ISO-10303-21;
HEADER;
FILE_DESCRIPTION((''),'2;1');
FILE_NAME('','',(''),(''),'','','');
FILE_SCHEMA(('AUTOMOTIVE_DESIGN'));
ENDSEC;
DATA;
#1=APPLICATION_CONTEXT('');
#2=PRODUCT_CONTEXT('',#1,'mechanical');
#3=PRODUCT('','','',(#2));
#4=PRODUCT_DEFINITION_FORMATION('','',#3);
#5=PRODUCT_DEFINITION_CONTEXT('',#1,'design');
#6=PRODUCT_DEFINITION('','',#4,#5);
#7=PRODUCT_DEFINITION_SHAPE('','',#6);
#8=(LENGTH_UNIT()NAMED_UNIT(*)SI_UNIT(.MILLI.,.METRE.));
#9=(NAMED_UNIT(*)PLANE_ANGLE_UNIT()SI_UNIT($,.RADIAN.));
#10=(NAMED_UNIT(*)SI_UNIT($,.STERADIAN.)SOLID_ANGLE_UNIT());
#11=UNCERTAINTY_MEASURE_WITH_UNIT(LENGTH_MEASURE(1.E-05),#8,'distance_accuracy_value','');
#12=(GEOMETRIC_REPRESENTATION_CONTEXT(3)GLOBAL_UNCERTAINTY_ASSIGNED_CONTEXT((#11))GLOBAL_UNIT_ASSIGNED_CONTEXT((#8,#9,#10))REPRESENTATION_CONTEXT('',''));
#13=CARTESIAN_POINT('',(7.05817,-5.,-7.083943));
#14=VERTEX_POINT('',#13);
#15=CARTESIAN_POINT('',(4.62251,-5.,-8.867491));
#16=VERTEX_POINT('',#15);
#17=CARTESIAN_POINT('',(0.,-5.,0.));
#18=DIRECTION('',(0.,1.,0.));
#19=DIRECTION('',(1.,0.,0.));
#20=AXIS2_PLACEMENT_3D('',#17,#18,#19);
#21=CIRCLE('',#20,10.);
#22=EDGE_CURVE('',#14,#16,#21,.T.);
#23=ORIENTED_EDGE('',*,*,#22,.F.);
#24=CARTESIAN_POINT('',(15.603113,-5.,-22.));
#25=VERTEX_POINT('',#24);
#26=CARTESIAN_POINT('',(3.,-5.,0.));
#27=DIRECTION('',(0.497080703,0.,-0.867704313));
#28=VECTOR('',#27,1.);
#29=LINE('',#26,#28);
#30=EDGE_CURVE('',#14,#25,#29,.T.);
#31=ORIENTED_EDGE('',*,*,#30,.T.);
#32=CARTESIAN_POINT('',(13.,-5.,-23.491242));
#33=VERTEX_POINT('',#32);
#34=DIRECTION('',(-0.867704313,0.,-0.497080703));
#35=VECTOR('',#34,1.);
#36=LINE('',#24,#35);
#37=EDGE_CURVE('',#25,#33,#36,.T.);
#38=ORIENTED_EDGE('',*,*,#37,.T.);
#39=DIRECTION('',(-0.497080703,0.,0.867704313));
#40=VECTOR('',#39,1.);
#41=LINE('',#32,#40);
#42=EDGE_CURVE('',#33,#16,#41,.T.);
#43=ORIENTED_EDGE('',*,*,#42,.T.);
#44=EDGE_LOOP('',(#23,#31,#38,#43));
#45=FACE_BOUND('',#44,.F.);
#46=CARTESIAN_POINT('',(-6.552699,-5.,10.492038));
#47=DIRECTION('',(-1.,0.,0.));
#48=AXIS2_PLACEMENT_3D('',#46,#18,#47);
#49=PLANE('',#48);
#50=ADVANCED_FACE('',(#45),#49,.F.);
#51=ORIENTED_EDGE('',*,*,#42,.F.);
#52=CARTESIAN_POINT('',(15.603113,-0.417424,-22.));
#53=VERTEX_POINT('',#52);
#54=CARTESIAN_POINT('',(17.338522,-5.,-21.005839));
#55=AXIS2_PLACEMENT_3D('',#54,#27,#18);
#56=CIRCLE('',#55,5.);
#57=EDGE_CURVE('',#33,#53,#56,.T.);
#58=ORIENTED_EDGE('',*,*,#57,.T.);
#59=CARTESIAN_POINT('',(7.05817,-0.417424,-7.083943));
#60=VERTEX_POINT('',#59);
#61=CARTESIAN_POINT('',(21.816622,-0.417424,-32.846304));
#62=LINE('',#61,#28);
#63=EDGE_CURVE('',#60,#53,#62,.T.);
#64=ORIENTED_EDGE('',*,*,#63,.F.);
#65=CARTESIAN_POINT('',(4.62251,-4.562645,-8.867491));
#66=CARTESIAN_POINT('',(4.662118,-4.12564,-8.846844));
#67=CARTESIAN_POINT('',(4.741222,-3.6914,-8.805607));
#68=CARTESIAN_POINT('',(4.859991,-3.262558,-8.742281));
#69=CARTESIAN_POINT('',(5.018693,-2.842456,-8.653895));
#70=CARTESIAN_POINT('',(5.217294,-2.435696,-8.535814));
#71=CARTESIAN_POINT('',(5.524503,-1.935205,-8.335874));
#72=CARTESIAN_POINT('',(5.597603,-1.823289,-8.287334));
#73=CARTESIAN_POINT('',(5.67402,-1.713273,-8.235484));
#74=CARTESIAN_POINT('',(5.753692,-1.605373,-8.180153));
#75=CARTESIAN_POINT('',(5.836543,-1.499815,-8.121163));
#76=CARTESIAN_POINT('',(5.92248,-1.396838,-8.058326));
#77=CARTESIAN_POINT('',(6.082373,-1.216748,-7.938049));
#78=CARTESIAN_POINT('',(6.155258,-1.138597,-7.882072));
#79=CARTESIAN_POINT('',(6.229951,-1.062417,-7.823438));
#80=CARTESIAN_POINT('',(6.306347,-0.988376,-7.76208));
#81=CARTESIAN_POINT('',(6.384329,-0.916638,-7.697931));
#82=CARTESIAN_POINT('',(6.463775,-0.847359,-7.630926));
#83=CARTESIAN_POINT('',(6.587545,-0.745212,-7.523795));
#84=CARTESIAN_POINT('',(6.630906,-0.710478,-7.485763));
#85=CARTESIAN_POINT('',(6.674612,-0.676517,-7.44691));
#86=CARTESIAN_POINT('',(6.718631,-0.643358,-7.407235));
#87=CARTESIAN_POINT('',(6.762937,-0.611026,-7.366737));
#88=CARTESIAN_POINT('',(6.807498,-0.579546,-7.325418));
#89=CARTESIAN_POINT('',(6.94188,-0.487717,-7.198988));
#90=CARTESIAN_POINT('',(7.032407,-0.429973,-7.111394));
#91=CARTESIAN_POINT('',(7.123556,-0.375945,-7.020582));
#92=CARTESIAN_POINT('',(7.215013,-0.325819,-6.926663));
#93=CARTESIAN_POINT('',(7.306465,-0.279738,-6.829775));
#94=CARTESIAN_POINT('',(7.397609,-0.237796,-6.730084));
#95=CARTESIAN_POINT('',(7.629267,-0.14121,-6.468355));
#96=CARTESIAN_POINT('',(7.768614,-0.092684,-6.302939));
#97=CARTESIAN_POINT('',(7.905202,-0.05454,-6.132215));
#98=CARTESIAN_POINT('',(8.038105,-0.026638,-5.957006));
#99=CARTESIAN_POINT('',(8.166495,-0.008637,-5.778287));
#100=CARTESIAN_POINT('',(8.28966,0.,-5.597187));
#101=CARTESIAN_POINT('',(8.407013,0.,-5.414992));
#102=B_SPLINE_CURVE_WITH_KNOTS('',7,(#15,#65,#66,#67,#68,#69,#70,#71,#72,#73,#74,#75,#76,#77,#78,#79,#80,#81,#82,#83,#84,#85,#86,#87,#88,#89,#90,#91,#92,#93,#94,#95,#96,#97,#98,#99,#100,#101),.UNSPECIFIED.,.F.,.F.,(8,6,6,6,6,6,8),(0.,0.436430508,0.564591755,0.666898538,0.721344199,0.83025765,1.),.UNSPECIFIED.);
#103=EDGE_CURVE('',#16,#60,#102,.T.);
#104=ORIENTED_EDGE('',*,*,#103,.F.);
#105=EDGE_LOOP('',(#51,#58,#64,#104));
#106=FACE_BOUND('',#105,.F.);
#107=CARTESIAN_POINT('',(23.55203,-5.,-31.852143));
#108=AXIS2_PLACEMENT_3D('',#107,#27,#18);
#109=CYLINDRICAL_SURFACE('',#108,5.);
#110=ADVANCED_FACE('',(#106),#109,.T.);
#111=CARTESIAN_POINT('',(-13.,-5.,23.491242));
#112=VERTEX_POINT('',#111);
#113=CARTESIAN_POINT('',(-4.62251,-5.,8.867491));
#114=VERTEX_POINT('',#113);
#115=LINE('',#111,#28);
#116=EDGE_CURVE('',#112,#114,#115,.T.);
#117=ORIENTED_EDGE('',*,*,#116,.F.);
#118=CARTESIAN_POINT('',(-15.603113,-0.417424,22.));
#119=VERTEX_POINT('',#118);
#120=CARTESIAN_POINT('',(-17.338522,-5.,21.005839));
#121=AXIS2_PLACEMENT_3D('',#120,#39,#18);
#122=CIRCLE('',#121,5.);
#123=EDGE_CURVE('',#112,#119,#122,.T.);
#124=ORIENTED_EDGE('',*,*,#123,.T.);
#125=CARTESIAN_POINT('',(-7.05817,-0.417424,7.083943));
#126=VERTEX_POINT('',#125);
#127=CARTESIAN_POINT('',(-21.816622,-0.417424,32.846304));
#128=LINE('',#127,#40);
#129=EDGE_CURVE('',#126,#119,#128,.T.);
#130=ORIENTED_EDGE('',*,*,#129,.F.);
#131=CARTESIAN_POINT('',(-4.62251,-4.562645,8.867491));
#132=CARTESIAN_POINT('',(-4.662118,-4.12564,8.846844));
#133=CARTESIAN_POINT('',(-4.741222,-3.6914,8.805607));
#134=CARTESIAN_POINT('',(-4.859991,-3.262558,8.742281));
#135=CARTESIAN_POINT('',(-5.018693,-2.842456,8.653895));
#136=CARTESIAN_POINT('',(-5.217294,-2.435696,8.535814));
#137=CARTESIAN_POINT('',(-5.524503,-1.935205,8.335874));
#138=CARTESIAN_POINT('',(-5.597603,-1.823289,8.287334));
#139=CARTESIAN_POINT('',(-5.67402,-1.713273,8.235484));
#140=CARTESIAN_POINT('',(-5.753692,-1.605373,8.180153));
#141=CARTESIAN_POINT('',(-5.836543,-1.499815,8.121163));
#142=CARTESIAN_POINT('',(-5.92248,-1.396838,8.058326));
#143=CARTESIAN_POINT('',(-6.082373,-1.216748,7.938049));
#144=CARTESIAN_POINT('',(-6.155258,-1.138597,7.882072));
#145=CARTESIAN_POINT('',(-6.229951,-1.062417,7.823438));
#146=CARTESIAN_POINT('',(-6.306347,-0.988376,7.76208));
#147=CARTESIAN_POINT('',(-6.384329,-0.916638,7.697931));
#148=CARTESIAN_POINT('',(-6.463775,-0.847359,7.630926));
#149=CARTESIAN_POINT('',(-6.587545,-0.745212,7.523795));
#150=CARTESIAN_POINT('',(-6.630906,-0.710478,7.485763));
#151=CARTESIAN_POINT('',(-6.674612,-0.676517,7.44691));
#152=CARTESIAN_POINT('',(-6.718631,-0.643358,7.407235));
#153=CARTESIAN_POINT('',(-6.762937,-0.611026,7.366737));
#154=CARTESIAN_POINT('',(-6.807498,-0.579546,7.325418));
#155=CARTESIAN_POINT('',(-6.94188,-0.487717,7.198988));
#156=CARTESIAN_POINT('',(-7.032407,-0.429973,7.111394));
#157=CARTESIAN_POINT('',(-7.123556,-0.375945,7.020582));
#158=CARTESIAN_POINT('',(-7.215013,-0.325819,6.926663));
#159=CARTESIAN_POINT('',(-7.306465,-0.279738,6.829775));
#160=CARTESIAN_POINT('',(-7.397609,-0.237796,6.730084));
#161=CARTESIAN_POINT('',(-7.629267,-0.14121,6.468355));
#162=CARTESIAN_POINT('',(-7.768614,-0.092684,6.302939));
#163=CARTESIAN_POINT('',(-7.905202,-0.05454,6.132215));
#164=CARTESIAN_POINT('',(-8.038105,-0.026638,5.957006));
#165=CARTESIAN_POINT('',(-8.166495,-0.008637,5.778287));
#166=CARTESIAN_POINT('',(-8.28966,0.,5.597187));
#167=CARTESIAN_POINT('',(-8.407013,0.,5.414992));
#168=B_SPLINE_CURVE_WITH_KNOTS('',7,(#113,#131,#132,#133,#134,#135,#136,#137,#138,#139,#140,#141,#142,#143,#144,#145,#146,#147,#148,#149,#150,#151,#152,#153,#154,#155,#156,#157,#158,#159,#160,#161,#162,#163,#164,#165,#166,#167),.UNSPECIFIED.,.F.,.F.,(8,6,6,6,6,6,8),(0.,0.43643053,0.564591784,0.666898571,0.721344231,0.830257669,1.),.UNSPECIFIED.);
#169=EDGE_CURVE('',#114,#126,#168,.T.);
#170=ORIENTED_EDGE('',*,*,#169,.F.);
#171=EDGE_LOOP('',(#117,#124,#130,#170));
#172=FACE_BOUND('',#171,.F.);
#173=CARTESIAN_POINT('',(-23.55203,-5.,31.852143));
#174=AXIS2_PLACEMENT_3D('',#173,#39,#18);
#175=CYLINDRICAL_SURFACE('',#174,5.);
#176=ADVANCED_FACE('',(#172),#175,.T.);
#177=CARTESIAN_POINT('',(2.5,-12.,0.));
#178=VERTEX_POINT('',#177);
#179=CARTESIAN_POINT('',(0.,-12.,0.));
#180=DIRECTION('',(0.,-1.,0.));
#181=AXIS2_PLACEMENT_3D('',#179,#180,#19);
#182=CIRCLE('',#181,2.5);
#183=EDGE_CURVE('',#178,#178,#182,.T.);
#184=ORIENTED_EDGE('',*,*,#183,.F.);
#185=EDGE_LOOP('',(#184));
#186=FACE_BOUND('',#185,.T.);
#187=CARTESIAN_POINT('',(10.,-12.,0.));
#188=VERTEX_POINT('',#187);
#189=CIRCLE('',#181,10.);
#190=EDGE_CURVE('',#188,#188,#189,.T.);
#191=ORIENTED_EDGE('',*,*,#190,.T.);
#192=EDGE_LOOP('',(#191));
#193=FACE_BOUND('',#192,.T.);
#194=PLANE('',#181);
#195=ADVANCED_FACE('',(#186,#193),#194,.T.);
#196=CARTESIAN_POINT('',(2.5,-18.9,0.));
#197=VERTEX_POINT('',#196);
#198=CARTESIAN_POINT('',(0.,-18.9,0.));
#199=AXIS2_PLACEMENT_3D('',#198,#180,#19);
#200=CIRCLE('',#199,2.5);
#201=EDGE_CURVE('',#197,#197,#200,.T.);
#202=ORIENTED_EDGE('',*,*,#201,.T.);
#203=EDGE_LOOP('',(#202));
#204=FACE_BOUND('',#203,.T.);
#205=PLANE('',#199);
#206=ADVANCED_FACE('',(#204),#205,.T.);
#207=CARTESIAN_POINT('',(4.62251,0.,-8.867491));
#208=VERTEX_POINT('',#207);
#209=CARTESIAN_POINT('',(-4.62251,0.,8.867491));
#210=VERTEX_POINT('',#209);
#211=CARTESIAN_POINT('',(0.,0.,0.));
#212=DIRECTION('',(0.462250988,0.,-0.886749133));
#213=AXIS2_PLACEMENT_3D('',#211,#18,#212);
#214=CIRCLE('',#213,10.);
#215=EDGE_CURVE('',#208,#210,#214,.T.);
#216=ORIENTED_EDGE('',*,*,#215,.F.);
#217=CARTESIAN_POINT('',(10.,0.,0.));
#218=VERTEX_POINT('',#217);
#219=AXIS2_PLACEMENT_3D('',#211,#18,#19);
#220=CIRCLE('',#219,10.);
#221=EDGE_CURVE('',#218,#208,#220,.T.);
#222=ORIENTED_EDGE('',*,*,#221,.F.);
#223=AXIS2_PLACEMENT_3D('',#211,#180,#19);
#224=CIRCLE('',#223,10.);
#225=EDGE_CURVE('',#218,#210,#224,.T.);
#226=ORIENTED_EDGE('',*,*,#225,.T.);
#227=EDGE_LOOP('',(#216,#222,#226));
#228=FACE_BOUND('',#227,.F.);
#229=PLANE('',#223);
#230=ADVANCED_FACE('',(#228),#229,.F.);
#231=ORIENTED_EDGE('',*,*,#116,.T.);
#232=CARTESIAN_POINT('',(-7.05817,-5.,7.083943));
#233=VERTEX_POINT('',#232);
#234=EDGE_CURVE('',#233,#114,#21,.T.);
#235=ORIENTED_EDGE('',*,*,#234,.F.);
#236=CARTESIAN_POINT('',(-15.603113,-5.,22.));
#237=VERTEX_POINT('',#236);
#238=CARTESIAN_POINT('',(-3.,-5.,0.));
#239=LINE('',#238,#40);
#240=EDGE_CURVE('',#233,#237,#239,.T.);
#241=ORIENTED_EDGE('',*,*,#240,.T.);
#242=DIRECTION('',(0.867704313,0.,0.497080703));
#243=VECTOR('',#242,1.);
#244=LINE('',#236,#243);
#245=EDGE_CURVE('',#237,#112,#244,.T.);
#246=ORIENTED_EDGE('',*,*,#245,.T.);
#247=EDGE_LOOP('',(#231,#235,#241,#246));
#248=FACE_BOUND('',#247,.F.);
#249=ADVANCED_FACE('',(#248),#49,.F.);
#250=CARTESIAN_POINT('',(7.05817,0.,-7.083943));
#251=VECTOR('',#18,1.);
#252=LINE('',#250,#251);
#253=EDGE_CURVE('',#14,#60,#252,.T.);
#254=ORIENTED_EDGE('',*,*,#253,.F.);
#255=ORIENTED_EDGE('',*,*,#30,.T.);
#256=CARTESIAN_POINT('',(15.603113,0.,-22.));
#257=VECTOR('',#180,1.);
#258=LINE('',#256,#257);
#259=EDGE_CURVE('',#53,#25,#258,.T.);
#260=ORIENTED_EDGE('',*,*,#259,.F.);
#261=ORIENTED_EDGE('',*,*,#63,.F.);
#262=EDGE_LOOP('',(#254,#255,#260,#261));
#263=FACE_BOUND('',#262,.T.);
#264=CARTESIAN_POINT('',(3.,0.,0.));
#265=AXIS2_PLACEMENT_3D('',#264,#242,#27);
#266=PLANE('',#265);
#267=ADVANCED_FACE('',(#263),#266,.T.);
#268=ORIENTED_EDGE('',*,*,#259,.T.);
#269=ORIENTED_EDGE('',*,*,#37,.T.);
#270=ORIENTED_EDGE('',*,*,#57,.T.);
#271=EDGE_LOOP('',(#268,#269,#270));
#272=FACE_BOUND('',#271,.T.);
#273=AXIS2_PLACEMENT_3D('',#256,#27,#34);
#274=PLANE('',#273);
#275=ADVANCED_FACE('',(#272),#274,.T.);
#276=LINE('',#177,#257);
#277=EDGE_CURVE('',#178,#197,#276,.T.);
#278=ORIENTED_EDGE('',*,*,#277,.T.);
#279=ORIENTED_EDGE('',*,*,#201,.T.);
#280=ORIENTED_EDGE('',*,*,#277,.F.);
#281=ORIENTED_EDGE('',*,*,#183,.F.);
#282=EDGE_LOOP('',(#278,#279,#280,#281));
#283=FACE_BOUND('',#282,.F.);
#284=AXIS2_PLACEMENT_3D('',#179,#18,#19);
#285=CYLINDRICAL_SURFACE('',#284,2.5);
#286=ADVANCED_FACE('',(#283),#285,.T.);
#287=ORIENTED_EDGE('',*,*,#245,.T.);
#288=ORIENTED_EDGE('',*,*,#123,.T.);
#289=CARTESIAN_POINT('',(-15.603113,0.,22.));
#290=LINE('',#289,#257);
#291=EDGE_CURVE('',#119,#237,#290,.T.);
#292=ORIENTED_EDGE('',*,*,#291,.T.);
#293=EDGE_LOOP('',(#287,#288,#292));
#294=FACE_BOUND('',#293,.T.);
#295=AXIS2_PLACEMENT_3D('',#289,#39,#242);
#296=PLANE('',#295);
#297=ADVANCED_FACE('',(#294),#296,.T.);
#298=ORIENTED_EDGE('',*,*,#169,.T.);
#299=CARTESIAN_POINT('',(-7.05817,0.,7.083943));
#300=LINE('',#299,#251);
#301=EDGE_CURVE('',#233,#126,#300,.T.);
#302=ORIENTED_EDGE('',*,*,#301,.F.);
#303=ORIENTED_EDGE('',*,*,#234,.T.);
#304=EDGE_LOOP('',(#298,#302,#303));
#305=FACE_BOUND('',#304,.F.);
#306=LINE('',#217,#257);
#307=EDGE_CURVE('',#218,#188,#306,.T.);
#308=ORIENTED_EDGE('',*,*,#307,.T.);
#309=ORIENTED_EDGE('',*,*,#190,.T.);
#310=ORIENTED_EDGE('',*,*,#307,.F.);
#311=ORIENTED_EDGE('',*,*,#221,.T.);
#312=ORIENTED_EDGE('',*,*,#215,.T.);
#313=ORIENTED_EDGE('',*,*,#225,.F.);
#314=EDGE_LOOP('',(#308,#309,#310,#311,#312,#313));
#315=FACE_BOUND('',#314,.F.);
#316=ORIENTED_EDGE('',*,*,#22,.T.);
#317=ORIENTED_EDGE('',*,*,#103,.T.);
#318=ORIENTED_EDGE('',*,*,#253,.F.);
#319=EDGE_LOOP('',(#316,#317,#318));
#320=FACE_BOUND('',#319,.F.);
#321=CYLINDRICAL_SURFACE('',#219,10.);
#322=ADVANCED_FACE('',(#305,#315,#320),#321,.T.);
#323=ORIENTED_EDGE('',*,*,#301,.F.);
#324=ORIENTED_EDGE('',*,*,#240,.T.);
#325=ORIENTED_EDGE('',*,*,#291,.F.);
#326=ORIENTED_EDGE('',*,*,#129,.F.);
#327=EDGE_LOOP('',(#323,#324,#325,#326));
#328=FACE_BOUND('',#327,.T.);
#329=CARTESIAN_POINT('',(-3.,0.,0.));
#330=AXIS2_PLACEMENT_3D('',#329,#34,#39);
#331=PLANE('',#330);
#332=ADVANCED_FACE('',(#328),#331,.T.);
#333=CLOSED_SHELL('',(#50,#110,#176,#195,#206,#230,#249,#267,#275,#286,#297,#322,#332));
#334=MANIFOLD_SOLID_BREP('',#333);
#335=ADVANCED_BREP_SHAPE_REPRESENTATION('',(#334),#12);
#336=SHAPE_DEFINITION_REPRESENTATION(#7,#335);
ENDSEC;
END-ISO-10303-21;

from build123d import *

# Parameters (mm, degrees)
F0_R         = 10
F1_DEPTH     = 12
F3_DEPTH     = 5
F4_T4_DEPTH  = 41.8533803035
F4_S5_R      = 10
F4_T6_DEPTH  = 25
F4_T10_DEPTH = 41.8533803035
F4_S11_R     = 10
F4_T12_DEPTH = 25
F5_R         = 2.5
F6_DEPTH     = 6.9


# Not quite as in the source:
# - a fillet or chamfer that OpenCascade refuses, or shapes differently, is made with other operations: its cross-section is extruded or revolved along the edge and cut away or added


with BuildPart() as f1:
    # F0 (on Front) → F1 (new body)
    with BuildSketch(Plane.XZ):
        Circle(F0_R)
    extrude(amount=F1_DEPTH)

    # F2 (on face) → F3 (join)
    with BuildSketch(Plane(origin=(0, 0, 0), x_dir=(-1, 0, 0), z_dir=(0, 1, 0))):
        Polygon((2.4069448783, 5), (-2.4069448783, 5), (-3, 0), (3, 0), (15.6031129395, 22), (13, 23.4912421078), align=None)
        Polygon((3, 0), (-3, 0), (-15.6031129395, -22), (-13, -23.4912421078), (-2.4069448783, -5), (2.4069448783, -5), align=None)
    extrude(amount=-F3_DEPTH)

    # F4: fillet of radius 5 on 2 edges, made by hand


with BuildPart() as f4_tool2:
    # F4_s3 → F4_t4 (new body)
    with BuildSketch(Plane(origin=(-19.5578893967, 0, 34.1402611236), x_dir=(0, 1, 0), z_dir=(0.4970807026, 0, -0.8677043132))):
        with BuildLine():
            ThreePointArc((0, -4.6031129395), (-1.4644660941, -1.0675790336), (-5, 0.3968870605))
            Line((-5, 0.3968870605), (0, 0.3968870605))
            Line((0, 0.3968870605), (0, -4.6031129395))
        make_face()
    extrude(amount=F4_T4_DEPTH)

    # F4_s5 → F4_t6 (cut, symmetric)
    with BuildSketch(Plane.XZ.offset(2.5)):
        Circle(F4_S5_R)
    extrude(amount=F4_T6_DEPTH, both=True, mode=Mode.SUBTRACT)


with BuildPart() as f1_1:
    add(f1.part)

    # F4_t1: cut F4_tool2
    add(f4_tool2.part, mode=Mode.SUBTRACT)


with BuildPart() as f4_tool8:
    # F4_s9 → F4_t10 (new body)
    with BuildSketch(Plane(origin=(19.5578893967, 0, -34.1402611236), x_dir=(0, 1, 0), z_dir=(-0.4970807026, 0, 0.8677043132))):
        with BuildLine():
            ThreePointArc((0, -4.6031129395), (-1.4644660941, -1.0675790336), (-5, 0.3968870605))
            Line((-5, 0.3968870605), (0, 0.3968870605))
            Line((0, 0.3968870605), (0, -4.6031129395))
        make_face()
    extrude(amount=F4_T10_DEPTH)

    # F4_s11 → F4_t12 (cut, symmetric)
    with BuildSketch(Plane.XZ.offset(2.5)):
        Circle(F4_S11_R)
    extrude(amount=F4_T12_DEPTH, both=True, mode=Mode.SUBTRACT)


with BuildPart() as f1_2:
    add(f1_1.part)

    # F4_t7: cut F4_tool8
    add(f4_tool8.part, mode=Mode.SUBTRACT)

    # F5 (on face) → F6 (join)
    with BuildSketch(Plane.XZ.offset(12)):
        Circle(F5_R)
    extrude(amount=F6_DEPTH)


solid = f1_2.part
